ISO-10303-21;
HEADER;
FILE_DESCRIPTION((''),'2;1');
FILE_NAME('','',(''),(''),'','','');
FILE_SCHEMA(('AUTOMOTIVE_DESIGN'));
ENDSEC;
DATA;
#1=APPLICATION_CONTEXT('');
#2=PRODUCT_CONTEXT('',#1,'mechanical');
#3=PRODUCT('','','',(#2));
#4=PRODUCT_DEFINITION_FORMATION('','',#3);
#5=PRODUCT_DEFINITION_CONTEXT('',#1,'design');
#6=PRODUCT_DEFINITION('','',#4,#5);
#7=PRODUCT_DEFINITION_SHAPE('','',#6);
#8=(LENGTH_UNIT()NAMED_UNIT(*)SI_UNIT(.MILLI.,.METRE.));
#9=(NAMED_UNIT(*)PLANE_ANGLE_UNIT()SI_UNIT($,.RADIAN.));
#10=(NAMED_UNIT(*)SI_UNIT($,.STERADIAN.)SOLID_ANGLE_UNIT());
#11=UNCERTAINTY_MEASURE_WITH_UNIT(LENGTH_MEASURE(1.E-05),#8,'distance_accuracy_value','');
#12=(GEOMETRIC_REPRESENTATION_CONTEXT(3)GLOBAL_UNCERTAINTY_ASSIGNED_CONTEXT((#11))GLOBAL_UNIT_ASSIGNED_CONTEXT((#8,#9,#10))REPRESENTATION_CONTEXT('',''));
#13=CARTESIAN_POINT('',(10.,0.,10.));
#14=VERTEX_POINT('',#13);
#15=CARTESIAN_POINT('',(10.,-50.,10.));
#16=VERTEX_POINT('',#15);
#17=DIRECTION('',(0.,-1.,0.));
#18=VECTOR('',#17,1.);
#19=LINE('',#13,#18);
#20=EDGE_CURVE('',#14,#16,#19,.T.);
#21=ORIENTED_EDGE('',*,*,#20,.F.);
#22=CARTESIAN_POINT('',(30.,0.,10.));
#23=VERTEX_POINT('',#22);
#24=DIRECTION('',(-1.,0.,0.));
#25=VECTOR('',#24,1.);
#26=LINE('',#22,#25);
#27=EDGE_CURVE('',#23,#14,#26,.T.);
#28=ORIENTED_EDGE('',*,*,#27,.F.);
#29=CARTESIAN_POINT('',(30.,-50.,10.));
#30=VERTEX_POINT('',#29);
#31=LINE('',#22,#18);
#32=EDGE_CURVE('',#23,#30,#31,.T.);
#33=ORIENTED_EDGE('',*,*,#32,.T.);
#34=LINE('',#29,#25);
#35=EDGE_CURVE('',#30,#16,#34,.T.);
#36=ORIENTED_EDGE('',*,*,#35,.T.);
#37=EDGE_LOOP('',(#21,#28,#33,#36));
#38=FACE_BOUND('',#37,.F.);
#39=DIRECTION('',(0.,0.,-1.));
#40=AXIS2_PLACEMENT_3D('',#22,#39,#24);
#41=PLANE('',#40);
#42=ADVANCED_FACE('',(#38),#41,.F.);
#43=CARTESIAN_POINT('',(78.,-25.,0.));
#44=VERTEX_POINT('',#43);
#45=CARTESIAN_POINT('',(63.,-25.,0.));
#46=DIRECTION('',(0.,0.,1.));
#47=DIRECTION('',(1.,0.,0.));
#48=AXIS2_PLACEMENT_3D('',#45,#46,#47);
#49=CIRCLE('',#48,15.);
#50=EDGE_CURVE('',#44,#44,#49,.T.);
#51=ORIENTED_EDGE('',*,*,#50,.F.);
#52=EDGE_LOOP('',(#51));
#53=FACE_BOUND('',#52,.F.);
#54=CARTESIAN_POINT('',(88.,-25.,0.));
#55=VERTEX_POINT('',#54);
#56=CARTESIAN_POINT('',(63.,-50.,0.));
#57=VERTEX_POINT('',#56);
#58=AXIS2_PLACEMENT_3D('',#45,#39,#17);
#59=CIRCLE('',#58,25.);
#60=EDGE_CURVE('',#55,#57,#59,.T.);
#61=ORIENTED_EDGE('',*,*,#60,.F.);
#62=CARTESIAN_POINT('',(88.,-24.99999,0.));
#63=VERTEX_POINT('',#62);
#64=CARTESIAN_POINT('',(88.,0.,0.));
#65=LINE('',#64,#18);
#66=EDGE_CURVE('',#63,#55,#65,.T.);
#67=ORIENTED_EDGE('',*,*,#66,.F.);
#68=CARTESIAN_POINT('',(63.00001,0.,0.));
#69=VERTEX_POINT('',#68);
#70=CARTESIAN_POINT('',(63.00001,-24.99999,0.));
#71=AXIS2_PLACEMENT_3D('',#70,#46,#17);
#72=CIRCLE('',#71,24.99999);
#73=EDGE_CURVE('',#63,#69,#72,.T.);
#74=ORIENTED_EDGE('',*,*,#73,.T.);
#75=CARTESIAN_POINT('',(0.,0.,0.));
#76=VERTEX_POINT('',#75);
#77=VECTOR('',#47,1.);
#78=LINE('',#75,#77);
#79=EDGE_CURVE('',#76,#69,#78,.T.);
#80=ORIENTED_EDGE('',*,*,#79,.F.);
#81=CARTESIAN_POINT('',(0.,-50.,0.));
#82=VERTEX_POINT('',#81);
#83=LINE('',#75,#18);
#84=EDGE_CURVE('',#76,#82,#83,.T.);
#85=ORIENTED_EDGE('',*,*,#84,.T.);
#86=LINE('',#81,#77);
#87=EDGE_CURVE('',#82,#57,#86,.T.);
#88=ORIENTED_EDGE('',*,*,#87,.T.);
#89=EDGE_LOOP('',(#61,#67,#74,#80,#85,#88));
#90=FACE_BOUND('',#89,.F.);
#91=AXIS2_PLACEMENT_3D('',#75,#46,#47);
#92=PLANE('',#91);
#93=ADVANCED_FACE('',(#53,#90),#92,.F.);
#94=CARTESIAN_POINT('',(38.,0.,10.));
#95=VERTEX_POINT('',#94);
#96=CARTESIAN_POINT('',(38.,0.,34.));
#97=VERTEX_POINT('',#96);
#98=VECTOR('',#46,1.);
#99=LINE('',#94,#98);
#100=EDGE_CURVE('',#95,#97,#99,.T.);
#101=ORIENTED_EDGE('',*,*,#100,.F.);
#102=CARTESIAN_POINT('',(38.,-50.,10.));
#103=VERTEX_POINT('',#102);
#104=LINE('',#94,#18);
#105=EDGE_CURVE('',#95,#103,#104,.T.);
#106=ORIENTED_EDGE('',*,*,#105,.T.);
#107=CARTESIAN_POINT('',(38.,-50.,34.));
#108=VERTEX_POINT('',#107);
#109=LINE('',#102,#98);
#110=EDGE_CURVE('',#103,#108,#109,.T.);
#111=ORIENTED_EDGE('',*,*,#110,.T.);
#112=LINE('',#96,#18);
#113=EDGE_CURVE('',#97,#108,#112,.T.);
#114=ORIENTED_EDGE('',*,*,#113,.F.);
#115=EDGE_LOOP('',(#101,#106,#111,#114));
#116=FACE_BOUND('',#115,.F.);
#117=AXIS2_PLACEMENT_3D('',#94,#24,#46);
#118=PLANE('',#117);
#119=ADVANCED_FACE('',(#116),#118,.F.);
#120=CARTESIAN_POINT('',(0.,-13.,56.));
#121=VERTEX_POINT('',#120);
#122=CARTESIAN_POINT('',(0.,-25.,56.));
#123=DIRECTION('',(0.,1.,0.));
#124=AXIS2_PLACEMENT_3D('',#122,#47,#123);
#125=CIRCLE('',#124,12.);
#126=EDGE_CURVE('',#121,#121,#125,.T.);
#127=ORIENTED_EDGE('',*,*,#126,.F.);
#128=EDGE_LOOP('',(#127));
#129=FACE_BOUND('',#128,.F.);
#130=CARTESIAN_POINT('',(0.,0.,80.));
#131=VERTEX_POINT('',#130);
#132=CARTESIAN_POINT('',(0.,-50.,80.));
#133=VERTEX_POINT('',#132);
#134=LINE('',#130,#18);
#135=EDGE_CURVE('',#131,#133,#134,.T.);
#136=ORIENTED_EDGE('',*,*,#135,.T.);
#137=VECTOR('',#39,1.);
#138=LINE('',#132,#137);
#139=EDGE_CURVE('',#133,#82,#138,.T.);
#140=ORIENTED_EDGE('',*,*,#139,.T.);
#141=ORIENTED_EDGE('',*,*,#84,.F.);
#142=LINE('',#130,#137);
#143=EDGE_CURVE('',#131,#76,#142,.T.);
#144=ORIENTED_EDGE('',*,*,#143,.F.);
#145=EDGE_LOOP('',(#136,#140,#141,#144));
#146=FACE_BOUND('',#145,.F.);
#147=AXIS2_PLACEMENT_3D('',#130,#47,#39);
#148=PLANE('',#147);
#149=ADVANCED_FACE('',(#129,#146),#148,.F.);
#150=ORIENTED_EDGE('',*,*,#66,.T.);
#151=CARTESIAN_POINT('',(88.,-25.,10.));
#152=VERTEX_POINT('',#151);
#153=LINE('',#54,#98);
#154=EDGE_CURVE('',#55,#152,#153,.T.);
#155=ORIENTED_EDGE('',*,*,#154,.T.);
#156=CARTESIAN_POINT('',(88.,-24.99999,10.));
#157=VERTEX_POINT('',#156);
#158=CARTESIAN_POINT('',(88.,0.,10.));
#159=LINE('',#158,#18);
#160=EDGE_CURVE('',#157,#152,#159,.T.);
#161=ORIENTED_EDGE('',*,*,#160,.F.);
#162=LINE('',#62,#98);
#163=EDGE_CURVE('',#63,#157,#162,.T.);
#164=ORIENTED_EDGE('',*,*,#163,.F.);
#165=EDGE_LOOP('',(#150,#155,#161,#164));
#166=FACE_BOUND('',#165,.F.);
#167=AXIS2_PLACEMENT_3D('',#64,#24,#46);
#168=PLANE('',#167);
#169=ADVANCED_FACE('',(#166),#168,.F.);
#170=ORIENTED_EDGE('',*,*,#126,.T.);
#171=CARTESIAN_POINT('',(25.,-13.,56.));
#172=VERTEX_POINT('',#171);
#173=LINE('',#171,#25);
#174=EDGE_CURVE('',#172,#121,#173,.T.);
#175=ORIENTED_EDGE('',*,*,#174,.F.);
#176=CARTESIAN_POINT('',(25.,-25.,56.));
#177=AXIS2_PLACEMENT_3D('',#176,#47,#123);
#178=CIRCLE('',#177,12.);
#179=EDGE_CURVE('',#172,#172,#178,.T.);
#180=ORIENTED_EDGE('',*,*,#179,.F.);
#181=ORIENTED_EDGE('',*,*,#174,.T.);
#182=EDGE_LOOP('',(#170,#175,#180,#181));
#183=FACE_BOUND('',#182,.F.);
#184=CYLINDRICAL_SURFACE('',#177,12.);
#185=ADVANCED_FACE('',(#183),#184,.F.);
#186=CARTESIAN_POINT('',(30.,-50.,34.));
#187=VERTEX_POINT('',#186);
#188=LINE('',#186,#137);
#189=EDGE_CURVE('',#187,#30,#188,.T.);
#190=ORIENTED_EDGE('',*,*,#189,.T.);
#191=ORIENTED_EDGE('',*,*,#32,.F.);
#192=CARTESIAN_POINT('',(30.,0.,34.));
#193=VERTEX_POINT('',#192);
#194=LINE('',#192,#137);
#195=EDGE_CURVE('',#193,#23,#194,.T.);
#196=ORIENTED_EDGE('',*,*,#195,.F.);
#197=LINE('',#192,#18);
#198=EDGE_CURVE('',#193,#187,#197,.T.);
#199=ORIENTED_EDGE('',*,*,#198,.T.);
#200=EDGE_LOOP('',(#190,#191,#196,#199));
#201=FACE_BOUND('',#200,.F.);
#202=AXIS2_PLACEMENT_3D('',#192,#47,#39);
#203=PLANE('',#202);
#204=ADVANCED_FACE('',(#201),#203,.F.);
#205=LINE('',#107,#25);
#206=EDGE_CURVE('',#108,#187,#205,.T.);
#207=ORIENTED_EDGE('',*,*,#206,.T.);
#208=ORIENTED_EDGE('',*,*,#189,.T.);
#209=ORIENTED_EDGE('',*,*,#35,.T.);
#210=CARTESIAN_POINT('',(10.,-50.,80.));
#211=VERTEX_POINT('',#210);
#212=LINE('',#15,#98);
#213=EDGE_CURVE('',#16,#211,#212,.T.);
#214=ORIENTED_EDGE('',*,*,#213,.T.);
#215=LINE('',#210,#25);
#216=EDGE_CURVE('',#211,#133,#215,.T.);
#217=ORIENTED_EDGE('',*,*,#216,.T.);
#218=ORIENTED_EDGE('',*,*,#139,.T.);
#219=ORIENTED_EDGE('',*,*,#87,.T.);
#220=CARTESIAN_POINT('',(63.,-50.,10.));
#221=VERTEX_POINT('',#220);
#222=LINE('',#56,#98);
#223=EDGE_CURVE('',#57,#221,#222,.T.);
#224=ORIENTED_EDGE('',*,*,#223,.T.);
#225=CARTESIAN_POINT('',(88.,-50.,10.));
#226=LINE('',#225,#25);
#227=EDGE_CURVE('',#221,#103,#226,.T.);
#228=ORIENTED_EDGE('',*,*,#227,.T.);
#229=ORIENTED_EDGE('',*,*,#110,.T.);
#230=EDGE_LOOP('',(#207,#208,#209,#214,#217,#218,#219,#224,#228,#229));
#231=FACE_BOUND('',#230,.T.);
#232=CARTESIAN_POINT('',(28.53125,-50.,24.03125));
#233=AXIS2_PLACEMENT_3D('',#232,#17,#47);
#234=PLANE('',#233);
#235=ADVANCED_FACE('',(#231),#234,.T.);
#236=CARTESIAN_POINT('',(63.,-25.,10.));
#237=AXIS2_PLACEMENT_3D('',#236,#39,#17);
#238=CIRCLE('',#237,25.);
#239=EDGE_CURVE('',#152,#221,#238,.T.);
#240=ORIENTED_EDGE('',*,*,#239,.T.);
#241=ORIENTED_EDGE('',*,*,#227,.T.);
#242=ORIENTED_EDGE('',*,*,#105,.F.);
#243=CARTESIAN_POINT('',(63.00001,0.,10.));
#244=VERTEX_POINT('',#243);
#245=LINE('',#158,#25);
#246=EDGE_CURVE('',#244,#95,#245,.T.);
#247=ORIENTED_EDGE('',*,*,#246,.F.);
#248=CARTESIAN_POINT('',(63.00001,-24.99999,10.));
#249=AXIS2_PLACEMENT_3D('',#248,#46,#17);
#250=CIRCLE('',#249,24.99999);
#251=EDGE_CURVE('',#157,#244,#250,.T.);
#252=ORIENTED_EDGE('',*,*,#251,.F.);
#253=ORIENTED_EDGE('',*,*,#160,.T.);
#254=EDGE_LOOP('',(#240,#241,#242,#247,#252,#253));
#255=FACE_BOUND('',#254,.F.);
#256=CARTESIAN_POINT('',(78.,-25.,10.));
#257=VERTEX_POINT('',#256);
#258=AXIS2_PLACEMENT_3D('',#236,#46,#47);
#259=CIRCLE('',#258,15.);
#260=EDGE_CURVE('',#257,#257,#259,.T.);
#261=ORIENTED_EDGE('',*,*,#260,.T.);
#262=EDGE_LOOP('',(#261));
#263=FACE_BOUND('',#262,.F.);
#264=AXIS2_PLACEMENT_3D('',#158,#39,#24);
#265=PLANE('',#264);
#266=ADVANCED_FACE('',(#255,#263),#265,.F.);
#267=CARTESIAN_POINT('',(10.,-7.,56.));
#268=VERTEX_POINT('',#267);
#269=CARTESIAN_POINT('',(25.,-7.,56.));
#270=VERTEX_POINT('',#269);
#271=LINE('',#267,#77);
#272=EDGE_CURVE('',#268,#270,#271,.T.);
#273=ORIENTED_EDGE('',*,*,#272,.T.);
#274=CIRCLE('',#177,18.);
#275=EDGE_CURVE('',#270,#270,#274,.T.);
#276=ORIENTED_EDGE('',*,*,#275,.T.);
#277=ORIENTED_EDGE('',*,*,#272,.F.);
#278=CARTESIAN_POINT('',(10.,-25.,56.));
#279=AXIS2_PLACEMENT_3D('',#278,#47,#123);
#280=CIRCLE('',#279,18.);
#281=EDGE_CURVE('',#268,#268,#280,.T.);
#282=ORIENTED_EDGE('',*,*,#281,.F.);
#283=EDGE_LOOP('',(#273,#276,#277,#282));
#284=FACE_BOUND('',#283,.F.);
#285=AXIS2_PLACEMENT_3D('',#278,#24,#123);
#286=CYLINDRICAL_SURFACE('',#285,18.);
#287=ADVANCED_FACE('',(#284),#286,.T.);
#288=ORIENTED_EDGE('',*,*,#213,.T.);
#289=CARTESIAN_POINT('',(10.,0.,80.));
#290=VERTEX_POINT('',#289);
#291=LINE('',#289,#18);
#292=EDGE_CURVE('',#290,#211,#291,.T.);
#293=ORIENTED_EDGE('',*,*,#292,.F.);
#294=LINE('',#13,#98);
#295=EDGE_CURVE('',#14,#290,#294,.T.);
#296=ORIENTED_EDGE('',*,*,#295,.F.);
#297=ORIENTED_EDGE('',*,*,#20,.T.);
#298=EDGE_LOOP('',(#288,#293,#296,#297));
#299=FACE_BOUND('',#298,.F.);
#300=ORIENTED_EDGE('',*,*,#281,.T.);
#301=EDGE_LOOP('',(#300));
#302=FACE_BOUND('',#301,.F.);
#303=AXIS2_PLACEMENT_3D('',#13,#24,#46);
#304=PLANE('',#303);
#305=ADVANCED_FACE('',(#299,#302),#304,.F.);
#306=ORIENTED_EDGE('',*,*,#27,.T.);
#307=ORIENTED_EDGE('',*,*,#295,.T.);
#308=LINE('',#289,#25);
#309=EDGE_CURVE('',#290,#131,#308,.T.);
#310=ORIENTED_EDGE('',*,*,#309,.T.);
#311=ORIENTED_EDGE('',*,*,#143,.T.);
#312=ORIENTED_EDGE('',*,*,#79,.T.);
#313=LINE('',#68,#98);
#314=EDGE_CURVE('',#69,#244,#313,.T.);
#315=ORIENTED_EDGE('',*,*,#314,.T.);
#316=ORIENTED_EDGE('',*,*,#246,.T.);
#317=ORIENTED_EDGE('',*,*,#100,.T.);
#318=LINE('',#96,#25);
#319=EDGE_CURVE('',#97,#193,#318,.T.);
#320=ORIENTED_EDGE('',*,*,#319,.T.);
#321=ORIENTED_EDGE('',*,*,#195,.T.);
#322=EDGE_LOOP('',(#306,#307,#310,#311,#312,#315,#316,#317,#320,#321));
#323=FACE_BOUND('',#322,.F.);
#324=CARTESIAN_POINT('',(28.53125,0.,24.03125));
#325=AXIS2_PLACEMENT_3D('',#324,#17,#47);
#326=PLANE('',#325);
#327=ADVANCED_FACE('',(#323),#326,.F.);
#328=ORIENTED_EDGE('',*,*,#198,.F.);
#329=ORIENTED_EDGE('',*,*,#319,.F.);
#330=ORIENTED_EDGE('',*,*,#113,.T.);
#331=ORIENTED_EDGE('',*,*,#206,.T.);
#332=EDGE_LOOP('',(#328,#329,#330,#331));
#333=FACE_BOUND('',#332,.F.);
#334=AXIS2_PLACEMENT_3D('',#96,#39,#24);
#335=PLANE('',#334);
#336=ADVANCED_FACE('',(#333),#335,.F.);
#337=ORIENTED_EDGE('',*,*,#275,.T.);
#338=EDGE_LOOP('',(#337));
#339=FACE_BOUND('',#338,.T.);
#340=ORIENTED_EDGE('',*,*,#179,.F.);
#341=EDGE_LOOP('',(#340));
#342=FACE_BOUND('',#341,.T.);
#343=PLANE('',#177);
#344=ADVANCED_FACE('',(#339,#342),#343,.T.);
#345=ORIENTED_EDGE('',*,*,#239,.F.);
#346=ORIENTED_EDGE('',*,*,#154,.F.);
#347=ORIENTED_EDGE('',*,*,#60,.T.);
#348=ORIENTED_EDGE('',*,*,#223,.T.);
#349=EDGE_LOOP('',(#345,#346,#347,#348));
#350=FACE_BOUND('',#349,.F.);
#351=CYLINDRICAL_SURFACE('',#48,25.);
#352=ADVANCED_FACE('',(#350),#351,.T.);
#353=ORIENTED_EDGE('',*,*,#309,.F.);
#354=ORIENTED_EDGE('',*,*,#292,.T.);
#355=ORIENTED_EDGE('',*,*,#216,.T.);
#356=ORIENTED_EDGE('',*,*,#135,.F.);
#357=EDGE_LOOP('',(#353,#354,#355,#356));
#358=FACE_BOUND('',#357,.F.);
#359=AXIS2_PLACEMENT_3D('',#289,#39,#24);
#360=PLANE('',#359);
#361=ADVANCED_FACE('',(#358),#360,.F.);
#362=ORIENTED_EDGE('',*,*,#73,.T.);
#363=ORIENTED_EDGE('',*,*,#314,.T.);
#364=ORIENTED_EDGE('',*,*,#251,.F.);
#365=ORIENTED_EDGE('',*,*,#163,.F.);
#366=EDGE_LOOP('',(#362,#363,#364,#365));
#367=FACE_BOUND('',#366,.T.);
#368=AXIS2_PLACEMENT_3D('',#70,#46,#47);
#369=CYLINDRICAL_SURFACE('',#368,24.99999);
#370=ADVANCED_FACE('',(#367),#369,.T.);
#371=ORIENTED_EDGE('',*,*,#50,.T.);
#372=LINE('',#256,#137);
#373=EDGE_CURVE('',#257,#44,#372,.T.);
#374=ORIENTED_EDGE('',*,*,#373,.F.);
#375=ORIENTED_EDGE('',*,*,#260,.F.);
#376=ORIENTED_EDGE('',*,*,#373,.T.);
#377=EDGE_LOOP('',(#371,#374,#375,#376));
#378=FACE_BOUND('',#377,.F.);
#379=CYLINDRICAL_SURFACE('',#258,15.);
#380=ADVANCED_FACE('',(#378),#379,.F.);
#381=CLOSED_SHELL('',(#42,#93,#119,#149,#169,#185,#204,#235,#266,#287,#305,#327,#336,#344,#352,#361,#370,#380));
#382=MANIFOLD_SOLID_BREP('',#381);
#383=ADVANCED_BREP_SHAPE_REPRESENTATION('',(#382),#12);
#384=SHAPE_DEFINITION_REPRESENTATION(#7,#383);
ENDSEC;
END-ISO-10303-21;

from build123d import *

# Parameters (mm, degrees)
F1_DEPTH = 50
F2_R     = 25
F3_R     = 24.99999
F4_R     = 15
F5_DEPTH = 10
F6_R     = 18
F7_DEPTH = 15
F8_R     = 12
F9_DEPTH = 25


# Not quite as in the source:
# - a fillet or chamfer is up to 0.001 mm smaller than in the source, because OpenCascade refuses the exact size


with BuildPart() as f1:
    # F0 (on Front) → F1 (new body)
    with BuildSketch(Plane.XZ):
        Polygon((0, 80), (0, 0), (88, 0), (88, 10), (38, 10), (38, 34), (30, 34), (30, 10), (10, 10), (10, 80), align=None)
    extrude(amount=F1_DEPTH)

    # F2
    f2_edges = [f1.edges().sort_by_distance(p)[0] for p in [
        (88, -50, 5),
    ]]
    fillet(f2_edges, radius=F2_R)

    # F3 (radius 25 in the source; OpenCascade refuses exactly that, so slightly less here)
    f3_edges = [f1.edges().sort_by_distance(p)[0] for p in [
        (88, 0, 5),
    ]]
    fillet(f3_edges, radius=F3_R)

    # F4 (on face) → F5 (cut, through all)
    with BuildSketch(Plane.XY.offset(10)):
        with Locations((63, -25)):
            Circle(F4_R)
    extrude(amount=-F5_DEPTH, mode=Mode.SUBTRACT)

    # F6 (on face) → F7 (join)
    with BuildSketch(Plane.YZ.offset(10)):
        with Locations((-25, 56)):
            Circle(F6_R)
    extrude(amount=F7_DEPTH)

    # F8 (on face) → F9 (cut, through all)
    with BuildSketch(Plane.YZ.offset(25)):
        with Locations((-25, 56)):
            Circle(F8_R)
    extrude(amount=-F9_DEPTH, mode=Mode.SUBTRACT)


solid = f1.part
